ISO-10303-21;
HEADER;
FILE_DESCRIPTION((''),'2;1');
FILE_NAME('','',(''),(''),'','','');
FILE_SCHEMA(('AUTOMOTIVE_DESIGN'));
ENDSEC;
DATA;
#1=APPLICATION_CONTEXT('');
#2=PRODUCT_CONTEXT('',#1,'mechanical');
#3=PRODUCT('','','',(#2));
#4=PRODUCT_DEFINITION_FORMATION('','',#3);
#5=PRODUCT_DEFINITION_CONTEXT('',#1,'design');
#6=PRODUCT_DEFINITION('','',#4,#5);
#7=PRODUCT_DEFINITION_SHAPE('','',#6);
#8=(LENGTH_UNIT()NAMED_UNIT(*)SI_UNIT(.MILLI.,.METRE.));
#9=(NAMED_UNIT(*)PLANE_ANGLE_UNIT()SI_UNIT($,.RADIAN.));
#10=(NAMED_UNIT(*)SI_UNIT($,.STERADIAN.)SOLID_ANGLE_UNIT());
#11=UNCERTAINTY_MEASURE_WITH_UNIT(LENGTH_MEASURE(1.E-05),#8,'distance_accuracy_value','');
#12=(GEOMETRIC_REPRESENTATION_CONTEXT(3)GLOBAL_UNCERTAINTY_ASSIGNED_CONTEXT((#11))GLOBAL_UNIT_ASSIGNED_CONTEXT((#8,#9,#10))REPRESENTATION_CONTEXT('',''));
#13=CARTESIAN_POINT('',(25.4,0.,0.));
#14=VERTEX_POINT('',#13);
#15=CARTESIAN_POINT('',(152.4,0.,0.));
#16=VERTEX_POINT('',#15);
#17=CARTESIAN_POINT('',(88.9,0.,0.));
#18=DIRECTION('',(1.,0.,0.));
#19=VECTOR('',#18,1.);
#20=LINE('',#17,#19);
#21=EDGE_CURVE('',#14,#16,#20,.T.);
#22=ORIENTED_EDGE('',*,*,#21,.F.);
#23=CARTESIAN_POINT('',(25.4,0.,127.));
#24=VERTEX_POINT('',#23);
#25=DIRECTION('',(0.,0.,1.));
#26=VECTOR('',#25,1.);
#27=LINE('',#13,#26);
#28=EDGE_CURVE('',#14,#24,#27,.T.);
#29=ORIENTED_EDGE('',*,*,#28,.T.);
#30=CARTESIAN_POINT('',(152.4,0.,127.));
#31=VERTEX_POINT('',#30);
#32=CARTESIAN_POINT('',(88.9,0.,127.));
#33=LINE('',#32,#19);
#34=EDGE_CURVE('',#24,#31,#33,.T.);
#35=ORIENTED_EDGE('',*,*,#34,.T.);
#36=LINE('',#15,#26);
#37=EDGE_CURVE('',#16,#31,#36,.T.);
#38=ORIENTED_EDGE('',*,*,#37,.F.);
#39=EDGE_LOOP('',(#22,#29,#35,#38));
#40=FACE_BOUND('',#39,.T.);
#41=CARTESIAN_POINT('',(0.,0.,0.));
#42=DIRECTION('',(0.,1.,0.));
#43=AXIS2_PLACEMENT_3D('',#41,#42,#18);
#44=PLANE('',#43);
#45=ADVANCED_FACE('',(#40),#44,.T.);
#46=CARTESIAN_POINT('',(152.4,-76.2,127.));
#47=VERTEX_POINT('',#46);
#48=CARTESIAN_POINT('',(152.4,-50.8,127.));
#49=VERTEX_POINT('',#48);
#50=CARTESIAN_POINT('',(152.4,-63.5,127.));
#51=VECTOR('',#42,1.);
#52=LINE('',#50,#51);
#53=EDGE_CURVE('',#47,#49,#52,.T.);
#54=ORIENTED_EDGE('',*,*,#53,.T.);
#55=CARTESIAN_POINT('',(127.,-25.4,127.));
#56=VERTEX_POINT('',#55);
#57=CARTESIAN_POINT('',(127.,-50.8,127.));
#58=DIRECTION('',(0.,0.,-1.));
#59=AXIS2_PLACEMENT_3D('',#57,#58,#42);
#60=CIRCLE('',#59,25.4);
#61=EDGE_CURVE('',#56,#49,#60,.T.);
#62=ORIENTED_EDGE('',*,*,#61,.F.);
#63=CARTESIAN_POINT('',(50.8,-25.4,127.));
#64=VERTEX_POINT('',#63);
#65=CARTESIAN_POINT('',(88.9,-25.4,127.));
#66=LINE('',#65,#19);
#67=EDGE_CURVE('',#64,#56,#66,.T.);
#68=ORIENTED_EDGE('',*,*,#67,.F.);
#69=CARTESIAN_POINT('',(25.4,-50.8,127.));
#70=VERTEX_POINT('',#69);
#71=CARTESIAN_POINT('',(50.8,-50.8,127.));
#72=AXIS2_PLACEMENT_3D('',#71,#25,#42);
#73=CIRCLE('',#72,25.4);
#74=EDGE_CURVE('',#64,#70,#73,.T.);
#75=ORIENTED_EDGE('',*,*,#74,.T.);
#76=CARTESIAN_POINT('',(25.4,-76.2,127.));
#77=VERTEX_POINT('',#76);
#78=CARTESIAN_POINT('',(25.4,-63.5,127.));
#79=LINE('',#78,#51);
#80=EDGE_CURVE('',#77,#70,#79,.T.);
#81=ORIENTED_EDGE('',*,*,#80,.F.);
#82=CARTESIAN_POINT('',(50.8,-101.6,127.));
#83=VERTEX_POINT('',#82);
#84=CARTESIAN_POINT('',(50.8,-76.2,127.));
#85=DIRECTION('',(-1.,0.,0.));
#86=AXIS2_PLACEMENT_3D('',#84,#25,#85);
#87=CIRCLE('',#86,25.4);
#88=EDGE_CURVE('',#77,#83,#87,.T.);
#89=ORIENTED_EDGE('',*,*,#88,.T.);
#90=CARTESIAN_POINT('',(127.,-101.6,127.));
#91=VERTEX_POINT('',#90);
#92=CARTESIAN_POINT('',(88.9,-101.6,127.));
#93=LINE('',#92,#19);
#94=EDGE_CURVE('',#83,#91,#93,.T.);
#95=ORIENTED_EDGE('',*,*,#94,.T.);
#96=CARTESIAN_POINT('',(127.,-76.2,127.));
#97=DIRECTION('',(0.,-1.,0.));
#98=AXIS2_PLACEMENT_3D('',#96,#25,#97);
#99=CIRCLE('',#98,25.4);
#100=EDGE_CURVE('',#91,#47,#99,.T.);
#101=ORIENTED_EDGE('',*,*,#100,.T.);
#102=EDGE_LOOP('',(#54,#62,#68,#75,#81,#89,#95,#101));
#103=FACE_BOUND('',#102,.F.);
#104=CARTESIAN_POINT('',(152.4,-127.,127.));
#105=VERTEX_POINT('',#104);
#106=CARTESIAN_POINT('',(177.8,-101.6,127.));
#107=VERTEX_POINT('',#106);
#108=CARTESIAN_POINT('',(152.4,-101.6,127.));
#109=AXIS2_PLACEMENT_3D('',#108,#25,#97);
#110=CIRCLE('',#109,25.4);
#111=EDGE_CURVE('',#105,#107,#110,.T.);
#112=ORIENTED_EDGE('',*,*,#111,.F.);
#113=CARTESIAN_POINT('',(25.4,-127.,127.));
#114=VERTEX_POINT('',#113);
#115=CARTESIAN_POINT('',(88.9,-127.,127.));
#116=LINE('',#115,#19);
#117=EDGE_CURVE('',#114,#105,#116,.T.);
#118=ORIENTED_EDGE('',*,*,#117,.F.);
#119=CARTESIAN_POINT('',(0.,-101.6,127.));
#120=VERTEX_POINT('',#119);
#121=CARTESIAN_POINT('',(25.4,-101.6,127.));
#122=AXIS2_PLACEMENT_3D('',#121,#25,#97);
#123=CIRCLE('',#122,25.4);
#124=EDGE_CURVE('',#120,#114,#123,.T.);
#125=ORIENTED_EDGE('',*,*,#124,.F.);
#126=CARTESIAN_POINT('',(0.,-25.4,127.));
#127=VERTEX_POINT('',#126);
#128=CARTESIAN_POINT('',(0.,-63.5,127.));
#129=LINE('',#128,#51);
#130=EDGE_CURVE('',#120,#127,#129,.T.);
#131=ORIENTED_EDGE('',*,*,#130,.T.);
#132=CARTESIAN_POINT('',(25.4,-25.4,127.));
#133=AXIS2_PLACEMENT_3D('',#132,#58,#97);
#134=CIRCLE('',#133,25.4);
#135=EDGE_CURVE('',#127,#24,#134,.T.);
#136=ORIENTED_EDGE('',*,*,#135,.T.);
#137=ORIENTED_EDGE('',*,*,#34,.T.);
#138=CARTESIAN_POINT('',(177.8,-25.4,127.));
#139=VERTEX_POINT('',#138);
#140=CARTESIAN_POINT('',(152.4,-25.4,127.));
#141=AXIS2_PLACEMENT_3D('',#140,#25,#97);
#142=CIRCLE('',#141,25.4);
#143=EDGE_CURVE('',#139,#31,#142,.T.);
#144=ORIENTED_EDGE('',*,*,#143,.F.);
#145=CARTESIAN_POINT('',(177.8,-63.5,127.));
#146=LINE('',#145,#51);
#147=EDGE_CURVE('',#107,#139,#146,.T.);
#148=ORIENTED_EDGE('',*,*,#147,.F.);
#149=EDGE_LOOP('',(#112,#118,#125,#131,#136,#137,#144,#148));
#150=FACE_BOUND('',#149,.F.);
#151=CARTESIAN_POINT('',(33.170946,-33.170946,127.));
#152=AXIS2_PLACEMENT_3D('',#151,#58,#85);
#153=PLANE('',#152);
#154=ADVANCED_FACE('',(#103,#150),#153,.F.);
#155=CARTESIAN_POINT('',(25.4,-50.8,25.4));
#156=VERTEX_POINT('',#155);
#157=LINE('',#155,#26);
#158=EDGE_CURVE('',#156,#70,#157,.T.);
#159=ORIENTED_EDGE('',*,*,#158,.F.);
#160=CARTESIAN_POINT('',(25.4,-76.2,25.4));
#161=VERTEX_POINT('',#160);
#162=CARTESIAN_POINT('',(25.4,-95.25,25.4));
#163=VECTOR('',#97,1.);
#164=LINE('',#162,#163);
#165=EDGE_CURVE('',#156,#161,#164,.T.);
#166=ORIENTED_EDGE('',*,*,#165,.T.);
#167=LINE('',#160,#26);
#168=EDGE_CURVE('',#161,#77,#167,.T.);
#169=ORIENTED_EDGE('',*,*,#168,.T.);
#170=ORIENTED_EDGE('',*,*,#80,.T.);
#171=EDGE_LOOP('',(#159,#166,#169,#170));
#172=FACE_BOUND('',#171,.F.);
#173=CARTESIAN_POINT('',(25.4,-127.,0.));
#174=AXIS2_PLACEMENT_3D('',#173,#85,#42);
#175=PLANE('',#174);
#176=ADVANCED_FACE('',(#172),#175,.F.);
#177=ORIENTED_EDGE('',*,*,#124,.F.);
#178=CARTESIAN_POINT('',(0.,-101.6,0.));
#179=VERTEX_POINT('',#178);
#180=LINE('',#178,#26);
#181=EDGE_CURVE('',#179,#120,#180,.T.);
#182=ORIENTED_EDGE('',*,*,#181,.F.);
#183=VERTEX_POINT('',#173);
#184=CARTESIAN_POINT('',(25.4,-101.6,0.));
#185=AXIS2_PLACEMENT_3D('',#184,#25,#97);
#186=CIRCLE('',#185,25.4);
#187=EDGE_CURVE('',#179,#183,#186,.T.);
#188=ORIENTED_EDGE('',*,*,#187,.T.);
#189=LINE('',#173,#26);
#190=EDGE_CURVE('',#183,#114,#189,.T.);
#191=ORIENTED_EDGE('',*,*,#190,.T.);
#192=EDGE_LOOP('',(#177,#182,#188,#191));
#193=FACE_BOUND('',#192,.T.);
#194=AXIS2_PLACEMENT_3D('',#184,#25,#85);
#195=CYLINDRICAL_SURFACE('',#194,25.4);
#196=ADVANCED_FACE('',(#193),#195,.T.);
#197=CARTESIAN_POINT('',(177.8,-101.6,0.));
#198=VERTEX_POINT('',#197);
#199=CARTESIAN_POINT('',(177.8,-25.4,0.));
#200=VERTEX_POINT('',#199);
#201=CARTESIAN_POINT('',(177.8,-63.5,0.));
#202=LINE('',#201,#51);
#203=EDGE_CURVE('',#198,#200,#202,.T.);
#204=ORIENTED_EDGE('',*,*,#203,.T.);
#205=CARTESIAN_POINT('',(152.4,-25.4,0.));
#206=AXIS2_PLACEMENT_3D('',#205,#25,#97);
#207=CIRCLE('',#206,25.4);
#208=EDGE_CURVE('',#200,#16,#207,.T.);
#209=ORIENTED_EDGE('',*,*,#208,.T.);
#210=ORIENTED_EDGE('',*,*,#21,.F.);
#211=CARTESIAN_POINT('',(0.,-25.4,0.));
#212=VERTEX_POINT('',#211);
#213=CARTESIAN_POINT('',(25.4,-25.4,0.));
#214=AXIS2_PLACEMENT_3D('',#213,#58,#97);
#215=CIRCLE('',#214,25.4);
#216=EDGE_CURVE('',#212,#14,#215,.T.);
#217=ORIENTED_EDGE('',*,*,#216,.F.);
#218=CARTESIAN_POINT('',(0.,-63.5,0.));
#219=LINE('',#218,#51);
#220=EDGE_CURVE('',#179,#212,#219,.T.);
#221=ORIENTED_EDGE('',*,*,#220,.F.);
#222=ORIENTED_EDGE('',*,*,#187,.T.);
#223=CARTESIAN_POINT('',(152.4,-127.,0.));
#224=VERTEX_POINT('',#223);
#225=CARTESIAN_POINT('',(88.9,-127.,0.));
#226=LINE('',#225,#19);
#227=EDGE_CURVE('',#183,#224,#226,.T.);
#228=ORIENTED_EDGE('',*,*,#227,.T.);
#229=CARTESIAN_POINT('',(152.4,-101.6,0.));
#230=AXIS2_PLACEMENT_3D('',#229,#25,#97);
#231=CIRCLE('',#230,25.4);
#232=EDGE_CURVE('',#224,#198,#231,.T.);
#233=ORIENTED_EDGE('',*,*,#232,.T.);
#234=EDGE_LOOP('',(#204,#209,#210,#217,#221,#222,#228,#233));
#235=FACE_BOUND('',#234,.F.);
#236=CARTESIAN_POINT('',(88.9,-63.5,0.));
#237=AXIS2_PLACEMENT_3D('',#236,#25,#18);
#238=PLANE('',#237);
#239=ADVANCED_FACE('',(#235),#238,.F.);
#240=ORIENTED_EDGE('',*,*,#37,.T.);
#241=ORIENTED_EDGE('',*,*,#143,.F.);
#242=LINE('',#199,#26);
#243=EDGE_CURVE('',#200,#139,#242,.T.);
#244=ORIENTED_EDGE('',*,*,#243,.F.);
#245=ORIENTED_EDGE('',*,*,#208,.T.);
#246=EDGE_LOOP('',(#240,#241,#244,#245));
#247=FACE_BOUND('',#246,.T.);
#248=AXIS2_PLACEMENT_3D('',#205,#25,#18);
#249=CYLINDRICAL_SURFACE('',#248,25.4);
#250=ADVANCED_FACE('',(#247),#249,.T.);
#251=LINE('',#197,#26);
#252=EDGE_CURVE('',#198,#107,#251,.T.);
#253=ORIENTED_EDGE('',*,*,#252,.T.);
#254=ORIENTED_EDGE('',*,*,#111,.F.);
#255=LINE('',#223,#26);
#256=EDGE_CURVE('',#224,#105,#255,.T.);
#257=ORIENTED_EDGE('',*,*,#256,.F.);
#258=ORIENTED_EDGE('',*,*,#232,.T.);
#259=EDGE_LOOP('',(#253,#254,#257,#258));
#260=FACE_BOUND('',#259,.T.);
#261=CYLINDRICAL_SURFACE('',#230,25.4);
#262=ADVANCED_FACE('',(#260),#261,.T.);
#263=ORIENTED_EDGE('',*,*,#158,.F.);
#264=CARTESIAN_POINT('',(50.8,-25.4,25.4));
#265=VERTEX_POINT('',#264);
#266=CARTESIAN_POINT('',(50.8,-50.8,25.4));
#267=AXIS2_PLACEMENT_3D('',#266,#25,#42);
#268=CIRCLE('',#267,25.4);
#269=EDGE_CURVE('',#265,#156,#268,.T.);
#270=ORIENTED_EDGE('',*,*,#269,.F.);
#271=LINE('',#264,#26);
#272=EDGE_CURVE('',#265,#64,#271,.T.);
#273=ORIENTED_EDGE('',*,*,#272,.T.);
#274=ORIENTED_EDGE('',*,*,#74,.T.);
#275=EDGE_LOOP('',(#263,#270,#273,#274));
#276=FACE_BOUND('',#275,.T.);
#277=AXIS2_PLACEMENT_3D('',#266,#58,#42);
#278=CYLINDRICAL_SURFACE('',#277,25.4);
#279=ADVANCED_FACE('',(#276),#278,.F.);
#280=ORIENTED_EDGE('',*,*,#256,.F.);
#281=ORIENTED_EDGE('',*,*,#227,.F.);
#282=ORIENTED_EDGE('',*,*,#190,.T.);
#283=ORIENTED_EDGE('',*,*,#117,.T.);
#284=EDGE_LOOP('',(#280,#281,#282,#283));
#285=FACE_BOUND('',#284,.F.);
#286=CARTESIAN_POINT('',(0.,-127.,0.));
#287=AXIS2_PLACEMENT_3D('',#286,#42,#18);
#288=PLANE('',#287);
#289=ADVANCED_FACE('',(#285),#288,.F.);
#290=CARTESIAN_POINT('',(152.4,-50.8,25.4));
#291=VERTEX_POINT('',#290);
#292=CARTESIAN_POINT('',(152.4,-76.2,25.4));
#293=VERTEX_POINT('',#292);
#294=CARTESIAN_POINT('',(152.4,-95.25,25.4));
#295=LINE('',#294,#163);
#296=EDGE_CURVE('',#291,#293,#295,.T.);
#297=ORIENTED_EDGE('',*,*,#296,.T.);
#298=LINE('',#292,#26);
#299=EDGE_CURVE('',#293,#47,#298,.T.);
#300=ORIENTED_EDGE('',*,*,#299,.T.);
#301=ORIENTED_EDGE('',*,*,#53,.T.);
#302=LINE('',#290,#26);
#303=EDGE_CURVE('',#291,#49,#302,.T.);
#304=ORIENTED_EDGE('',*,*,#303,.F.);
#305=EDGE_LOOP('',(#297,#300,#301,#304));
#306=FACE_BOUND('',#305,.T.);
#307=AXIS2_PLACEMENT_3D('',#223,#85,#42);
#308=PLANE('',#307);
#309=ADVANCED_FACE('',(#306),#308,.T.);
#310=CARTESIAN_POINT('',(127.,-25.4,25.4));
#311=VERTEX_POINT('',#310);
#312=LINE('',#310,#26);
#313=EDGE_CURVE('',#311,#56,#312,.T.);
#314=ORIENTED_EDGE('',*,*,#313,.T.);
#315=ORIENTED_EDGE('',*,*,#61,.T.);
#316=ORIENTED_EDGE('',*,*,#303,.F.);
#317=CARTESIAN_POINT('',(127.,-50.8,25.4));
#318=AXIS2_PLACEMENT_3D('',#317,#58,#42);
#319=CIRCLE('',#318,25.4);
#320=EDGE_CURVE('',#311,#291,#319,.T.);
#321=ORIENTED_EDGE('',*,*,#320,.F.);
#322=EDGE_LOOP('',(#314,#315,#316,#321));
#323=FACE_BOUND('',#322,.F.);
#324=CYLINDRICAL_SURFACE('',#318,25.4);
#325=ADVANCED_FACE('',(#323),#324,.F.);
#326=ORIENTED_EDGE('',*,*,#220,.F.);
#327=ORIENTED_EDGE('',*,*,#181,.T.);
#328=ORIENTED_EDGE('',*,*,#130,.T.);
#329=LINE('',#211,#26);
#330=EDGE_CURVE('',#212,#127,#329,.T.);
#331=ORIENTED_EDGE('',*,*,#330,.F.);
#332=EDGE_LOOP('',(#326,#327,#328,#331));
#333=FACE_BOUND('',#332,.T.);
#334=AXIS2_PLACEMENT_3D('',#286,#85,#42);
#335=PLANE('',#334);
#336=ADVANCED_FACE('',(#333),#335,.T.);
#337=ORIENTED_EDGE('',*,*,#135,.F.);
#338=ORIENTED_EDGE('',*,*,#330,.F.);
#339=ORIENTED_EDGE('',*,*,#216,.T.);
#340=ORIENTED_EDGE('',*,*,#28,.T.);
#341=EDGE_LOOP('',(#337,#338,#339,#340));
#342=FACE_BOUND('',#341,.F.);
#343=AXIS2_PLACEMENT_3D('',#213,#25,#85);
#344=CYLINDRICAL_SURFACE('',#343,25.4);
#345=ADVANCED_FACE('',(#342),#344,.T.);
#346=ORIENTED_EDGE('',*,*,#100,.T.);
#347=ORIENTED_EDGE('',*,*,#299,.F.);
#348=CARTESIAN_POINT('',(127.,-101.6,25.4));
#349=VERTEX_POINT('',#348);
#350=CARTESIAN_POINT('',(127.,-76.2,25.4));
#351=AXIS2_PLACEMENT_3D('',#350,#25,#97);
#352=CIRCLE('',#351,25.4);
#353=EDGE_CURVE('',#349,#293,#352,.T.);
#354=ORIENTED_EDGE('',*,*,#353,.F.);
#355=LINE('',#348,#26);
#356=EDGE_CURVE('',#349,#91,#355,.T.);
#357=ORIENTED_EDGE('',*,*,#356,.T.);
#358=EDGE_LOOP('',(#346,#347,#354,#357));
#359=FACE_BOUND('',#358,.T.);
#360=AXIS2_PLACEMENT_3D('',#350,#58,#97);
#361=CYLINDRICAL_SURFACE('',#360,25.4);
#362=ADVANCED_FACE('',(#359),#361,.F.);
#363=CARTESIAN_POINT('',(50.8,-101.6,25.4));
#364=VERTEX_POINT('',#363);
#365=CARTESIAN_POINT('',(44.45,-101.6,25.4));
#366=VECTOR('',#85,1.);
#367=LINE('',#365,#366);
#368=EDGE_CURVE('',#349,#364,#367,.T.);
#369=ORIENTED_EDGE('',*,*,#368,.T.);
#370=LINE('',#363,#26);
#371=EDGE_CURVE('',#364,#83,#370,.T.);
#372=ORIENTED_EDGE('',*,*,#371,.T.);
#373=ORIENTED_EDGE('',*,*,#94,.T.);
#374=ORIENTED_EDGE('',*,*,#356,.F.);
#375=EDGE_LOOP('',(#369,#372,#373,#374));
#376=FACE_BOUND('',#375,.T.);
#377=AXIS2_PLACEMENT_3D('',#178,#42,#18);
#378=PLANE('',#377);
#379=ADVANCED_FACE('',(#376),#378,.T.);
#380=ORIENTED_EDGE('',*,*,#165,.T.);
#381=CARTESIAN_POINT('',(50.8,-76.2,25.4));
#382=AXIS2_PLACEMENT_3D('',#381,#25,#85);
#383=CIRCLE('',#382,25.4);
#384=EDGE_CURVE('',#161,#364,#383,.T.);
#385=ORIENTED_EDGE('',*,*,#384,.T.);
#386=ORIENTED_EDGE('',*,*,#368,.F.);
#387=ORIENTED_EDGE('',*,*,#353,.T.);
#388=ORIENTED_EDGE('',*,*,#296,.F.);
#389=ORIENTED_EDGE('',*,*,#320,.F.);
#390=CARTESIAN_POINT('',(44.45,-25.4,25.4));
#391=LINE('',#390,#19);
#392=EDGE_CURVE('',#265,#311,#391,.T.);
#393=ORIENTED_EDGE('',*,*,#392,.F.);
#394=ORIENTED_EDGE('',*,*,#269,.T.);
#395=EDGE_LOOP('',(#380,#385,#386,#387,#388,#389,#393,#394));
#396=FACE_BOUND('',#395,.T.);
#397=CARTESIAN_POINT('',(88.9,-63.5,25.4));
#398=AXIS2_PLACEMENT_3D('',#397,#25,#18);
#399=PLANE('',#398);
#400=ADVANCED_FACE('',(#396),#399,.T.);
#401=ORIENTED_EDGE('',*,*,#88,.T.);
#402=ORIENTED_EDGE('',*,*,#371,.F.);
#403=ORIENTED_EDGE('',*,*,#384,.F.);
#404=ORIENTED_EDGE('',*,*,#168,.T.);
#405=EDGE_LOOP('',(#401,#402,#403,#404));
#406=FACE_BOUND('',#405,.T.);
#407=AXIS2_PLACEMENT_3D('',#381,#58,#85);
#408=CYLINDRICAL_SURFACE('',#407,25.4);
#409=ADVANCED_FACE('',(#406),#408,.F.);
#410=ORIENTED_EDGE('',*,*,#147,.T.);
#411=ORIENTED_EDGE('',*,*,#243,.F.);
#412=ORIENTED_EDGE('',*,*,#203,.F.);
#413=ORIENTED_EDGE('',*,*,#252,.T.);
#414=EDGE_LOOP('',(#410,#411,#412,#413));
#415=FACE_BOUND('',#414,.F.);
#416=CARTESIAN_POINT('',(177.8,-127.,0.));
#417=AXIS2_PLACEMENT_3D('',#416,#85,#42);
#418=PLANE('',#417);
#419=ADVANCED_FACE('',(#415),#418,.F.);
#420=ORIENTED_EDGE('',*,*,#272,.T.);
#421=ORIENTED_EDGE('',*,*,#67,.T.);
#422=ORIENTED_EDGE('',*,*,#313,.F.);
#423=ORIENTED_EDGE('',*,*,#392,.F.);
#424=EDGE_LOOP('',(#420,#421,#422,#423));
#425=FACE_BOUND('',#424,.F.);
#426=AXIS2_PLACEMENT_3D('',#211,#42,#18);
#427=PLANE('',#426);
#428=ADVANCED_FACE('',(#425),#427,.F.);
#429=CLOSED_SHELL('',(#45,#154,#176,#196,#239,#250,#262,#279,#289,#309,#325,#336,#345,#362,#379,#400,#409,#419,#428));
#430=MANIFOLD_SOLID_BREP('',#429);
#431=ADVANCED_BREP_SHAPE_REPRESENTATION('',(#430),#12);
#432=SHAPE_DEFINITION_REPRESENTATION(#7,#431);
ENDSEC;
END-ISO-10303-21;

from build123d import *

# Parameters (mm, degrees)
F0_W        = 177.8
F0_H        = 127
F1_DEPTH    = 127
F2_R        = 25.4
F3_T        = 25.4
F4_T1_DEPTH = 101.6


# Not quite as in the source:
# - a fillet or chamfer that OpenCascade refuses, or shapes differently, is made with other operations: its cross-section is extruded or revolved along the edge and cut away or added
# - a shell that OpenCascade refuses in one call is made with other operations: the cavity is built on its own and cut out


with BuildPart() as f1:
    # F0 (on Top) → F1 (new body)
    with BuildSketch(Plane.XY):
        with Locations((88.9, -63.5)):
            Rectangle(F0_W, F0_H)
    extrude(amount=F1_DEPTH)

    # F2
    f2_edges = [f1.edges().sort_by_distance(p)[0] for p in [
        (0, -127, 63.5),
        (177.8, -127, 63.5),
        (177.8, 0, 63.5),
        (0, 0, 63.5),
    ]]
    fillet(f2_edges, radius=F2_R)

    # F3: shell of thickness 25.4, made by hand


with BuildPart() as f3_core1:
    # F3_t2: copy of F1
    add(f1.part)

    # the walls: a layer under each face that stays
    f3_faces = [f3_core1.faces().sort_by_distance(p)[0] for p in [
        (88.9, 0, 63.5),
        (88.9, -63.5, 0),
        (177.8, -63.5, 63.5),
        (0, -63.5, 63.5),
        (88.9, -127, 63.5),
    ]]
    thicken(f3_faces, amount=-F3_T, mode=Mode.SUBTRACT)


with BuildPart() as f1_1:
    add(f1.part)

    # what is left inside the walls is the cavity
    f3_cavity = [f3_core1.part.solids().sort_by_distance(p)[0] for p in [
        (88.9, -25.654, 93.133333),
    ]]
    add(f3_cavity, mode=Mode.SUBTRACT)

    # F4: fillet of radius 25.4 on 6 edges, made by hand

    # F4_s2 → F4_t1 (join)
    with BuildSketch(Plane.XY.offset(25.4)):
        with BuildLine():
            ThreePointArc((50.8, -25.4), (32.8394877579, -32.8394877579), (25.4, -50.8))
            Line((25.4, -50.8), (25.4, -25.4))
            Line((25.4, -25.4), (50.8, -25.4))
        make_face()
        with BuildLine():
            ThreePointArc((127, -25.4), (144.9605122421, -32.8394877579), (152.4, -50.8))
            Line((152.4, -50.8), (152.4, -25.4))
            Line((152.4, -25.4), (127, -25.4))
        make_face()
        with BuildLine():
            ThreePointArc((25.4, -76.2), (32.8394877579, -94.1605122421), (50.8, -101.6))
            Line((50.8, -101.6), (25.4, -101.6))
            Line((25.4, -101.6), (25.4, -76.2))
        make_face()
        with BuildLine():
            ThreePointArc((127, -101.6), (144.9605122421, -94.1605122421), (152.4, -76.2))
            Line((152.4, -76.2), (152.4, -101.6))
            Line((152.4, -101.6), (127, -101.6))
        make_face()
    extrude(amount=F4_T1_DEPTH)


solid = f1_1.part
